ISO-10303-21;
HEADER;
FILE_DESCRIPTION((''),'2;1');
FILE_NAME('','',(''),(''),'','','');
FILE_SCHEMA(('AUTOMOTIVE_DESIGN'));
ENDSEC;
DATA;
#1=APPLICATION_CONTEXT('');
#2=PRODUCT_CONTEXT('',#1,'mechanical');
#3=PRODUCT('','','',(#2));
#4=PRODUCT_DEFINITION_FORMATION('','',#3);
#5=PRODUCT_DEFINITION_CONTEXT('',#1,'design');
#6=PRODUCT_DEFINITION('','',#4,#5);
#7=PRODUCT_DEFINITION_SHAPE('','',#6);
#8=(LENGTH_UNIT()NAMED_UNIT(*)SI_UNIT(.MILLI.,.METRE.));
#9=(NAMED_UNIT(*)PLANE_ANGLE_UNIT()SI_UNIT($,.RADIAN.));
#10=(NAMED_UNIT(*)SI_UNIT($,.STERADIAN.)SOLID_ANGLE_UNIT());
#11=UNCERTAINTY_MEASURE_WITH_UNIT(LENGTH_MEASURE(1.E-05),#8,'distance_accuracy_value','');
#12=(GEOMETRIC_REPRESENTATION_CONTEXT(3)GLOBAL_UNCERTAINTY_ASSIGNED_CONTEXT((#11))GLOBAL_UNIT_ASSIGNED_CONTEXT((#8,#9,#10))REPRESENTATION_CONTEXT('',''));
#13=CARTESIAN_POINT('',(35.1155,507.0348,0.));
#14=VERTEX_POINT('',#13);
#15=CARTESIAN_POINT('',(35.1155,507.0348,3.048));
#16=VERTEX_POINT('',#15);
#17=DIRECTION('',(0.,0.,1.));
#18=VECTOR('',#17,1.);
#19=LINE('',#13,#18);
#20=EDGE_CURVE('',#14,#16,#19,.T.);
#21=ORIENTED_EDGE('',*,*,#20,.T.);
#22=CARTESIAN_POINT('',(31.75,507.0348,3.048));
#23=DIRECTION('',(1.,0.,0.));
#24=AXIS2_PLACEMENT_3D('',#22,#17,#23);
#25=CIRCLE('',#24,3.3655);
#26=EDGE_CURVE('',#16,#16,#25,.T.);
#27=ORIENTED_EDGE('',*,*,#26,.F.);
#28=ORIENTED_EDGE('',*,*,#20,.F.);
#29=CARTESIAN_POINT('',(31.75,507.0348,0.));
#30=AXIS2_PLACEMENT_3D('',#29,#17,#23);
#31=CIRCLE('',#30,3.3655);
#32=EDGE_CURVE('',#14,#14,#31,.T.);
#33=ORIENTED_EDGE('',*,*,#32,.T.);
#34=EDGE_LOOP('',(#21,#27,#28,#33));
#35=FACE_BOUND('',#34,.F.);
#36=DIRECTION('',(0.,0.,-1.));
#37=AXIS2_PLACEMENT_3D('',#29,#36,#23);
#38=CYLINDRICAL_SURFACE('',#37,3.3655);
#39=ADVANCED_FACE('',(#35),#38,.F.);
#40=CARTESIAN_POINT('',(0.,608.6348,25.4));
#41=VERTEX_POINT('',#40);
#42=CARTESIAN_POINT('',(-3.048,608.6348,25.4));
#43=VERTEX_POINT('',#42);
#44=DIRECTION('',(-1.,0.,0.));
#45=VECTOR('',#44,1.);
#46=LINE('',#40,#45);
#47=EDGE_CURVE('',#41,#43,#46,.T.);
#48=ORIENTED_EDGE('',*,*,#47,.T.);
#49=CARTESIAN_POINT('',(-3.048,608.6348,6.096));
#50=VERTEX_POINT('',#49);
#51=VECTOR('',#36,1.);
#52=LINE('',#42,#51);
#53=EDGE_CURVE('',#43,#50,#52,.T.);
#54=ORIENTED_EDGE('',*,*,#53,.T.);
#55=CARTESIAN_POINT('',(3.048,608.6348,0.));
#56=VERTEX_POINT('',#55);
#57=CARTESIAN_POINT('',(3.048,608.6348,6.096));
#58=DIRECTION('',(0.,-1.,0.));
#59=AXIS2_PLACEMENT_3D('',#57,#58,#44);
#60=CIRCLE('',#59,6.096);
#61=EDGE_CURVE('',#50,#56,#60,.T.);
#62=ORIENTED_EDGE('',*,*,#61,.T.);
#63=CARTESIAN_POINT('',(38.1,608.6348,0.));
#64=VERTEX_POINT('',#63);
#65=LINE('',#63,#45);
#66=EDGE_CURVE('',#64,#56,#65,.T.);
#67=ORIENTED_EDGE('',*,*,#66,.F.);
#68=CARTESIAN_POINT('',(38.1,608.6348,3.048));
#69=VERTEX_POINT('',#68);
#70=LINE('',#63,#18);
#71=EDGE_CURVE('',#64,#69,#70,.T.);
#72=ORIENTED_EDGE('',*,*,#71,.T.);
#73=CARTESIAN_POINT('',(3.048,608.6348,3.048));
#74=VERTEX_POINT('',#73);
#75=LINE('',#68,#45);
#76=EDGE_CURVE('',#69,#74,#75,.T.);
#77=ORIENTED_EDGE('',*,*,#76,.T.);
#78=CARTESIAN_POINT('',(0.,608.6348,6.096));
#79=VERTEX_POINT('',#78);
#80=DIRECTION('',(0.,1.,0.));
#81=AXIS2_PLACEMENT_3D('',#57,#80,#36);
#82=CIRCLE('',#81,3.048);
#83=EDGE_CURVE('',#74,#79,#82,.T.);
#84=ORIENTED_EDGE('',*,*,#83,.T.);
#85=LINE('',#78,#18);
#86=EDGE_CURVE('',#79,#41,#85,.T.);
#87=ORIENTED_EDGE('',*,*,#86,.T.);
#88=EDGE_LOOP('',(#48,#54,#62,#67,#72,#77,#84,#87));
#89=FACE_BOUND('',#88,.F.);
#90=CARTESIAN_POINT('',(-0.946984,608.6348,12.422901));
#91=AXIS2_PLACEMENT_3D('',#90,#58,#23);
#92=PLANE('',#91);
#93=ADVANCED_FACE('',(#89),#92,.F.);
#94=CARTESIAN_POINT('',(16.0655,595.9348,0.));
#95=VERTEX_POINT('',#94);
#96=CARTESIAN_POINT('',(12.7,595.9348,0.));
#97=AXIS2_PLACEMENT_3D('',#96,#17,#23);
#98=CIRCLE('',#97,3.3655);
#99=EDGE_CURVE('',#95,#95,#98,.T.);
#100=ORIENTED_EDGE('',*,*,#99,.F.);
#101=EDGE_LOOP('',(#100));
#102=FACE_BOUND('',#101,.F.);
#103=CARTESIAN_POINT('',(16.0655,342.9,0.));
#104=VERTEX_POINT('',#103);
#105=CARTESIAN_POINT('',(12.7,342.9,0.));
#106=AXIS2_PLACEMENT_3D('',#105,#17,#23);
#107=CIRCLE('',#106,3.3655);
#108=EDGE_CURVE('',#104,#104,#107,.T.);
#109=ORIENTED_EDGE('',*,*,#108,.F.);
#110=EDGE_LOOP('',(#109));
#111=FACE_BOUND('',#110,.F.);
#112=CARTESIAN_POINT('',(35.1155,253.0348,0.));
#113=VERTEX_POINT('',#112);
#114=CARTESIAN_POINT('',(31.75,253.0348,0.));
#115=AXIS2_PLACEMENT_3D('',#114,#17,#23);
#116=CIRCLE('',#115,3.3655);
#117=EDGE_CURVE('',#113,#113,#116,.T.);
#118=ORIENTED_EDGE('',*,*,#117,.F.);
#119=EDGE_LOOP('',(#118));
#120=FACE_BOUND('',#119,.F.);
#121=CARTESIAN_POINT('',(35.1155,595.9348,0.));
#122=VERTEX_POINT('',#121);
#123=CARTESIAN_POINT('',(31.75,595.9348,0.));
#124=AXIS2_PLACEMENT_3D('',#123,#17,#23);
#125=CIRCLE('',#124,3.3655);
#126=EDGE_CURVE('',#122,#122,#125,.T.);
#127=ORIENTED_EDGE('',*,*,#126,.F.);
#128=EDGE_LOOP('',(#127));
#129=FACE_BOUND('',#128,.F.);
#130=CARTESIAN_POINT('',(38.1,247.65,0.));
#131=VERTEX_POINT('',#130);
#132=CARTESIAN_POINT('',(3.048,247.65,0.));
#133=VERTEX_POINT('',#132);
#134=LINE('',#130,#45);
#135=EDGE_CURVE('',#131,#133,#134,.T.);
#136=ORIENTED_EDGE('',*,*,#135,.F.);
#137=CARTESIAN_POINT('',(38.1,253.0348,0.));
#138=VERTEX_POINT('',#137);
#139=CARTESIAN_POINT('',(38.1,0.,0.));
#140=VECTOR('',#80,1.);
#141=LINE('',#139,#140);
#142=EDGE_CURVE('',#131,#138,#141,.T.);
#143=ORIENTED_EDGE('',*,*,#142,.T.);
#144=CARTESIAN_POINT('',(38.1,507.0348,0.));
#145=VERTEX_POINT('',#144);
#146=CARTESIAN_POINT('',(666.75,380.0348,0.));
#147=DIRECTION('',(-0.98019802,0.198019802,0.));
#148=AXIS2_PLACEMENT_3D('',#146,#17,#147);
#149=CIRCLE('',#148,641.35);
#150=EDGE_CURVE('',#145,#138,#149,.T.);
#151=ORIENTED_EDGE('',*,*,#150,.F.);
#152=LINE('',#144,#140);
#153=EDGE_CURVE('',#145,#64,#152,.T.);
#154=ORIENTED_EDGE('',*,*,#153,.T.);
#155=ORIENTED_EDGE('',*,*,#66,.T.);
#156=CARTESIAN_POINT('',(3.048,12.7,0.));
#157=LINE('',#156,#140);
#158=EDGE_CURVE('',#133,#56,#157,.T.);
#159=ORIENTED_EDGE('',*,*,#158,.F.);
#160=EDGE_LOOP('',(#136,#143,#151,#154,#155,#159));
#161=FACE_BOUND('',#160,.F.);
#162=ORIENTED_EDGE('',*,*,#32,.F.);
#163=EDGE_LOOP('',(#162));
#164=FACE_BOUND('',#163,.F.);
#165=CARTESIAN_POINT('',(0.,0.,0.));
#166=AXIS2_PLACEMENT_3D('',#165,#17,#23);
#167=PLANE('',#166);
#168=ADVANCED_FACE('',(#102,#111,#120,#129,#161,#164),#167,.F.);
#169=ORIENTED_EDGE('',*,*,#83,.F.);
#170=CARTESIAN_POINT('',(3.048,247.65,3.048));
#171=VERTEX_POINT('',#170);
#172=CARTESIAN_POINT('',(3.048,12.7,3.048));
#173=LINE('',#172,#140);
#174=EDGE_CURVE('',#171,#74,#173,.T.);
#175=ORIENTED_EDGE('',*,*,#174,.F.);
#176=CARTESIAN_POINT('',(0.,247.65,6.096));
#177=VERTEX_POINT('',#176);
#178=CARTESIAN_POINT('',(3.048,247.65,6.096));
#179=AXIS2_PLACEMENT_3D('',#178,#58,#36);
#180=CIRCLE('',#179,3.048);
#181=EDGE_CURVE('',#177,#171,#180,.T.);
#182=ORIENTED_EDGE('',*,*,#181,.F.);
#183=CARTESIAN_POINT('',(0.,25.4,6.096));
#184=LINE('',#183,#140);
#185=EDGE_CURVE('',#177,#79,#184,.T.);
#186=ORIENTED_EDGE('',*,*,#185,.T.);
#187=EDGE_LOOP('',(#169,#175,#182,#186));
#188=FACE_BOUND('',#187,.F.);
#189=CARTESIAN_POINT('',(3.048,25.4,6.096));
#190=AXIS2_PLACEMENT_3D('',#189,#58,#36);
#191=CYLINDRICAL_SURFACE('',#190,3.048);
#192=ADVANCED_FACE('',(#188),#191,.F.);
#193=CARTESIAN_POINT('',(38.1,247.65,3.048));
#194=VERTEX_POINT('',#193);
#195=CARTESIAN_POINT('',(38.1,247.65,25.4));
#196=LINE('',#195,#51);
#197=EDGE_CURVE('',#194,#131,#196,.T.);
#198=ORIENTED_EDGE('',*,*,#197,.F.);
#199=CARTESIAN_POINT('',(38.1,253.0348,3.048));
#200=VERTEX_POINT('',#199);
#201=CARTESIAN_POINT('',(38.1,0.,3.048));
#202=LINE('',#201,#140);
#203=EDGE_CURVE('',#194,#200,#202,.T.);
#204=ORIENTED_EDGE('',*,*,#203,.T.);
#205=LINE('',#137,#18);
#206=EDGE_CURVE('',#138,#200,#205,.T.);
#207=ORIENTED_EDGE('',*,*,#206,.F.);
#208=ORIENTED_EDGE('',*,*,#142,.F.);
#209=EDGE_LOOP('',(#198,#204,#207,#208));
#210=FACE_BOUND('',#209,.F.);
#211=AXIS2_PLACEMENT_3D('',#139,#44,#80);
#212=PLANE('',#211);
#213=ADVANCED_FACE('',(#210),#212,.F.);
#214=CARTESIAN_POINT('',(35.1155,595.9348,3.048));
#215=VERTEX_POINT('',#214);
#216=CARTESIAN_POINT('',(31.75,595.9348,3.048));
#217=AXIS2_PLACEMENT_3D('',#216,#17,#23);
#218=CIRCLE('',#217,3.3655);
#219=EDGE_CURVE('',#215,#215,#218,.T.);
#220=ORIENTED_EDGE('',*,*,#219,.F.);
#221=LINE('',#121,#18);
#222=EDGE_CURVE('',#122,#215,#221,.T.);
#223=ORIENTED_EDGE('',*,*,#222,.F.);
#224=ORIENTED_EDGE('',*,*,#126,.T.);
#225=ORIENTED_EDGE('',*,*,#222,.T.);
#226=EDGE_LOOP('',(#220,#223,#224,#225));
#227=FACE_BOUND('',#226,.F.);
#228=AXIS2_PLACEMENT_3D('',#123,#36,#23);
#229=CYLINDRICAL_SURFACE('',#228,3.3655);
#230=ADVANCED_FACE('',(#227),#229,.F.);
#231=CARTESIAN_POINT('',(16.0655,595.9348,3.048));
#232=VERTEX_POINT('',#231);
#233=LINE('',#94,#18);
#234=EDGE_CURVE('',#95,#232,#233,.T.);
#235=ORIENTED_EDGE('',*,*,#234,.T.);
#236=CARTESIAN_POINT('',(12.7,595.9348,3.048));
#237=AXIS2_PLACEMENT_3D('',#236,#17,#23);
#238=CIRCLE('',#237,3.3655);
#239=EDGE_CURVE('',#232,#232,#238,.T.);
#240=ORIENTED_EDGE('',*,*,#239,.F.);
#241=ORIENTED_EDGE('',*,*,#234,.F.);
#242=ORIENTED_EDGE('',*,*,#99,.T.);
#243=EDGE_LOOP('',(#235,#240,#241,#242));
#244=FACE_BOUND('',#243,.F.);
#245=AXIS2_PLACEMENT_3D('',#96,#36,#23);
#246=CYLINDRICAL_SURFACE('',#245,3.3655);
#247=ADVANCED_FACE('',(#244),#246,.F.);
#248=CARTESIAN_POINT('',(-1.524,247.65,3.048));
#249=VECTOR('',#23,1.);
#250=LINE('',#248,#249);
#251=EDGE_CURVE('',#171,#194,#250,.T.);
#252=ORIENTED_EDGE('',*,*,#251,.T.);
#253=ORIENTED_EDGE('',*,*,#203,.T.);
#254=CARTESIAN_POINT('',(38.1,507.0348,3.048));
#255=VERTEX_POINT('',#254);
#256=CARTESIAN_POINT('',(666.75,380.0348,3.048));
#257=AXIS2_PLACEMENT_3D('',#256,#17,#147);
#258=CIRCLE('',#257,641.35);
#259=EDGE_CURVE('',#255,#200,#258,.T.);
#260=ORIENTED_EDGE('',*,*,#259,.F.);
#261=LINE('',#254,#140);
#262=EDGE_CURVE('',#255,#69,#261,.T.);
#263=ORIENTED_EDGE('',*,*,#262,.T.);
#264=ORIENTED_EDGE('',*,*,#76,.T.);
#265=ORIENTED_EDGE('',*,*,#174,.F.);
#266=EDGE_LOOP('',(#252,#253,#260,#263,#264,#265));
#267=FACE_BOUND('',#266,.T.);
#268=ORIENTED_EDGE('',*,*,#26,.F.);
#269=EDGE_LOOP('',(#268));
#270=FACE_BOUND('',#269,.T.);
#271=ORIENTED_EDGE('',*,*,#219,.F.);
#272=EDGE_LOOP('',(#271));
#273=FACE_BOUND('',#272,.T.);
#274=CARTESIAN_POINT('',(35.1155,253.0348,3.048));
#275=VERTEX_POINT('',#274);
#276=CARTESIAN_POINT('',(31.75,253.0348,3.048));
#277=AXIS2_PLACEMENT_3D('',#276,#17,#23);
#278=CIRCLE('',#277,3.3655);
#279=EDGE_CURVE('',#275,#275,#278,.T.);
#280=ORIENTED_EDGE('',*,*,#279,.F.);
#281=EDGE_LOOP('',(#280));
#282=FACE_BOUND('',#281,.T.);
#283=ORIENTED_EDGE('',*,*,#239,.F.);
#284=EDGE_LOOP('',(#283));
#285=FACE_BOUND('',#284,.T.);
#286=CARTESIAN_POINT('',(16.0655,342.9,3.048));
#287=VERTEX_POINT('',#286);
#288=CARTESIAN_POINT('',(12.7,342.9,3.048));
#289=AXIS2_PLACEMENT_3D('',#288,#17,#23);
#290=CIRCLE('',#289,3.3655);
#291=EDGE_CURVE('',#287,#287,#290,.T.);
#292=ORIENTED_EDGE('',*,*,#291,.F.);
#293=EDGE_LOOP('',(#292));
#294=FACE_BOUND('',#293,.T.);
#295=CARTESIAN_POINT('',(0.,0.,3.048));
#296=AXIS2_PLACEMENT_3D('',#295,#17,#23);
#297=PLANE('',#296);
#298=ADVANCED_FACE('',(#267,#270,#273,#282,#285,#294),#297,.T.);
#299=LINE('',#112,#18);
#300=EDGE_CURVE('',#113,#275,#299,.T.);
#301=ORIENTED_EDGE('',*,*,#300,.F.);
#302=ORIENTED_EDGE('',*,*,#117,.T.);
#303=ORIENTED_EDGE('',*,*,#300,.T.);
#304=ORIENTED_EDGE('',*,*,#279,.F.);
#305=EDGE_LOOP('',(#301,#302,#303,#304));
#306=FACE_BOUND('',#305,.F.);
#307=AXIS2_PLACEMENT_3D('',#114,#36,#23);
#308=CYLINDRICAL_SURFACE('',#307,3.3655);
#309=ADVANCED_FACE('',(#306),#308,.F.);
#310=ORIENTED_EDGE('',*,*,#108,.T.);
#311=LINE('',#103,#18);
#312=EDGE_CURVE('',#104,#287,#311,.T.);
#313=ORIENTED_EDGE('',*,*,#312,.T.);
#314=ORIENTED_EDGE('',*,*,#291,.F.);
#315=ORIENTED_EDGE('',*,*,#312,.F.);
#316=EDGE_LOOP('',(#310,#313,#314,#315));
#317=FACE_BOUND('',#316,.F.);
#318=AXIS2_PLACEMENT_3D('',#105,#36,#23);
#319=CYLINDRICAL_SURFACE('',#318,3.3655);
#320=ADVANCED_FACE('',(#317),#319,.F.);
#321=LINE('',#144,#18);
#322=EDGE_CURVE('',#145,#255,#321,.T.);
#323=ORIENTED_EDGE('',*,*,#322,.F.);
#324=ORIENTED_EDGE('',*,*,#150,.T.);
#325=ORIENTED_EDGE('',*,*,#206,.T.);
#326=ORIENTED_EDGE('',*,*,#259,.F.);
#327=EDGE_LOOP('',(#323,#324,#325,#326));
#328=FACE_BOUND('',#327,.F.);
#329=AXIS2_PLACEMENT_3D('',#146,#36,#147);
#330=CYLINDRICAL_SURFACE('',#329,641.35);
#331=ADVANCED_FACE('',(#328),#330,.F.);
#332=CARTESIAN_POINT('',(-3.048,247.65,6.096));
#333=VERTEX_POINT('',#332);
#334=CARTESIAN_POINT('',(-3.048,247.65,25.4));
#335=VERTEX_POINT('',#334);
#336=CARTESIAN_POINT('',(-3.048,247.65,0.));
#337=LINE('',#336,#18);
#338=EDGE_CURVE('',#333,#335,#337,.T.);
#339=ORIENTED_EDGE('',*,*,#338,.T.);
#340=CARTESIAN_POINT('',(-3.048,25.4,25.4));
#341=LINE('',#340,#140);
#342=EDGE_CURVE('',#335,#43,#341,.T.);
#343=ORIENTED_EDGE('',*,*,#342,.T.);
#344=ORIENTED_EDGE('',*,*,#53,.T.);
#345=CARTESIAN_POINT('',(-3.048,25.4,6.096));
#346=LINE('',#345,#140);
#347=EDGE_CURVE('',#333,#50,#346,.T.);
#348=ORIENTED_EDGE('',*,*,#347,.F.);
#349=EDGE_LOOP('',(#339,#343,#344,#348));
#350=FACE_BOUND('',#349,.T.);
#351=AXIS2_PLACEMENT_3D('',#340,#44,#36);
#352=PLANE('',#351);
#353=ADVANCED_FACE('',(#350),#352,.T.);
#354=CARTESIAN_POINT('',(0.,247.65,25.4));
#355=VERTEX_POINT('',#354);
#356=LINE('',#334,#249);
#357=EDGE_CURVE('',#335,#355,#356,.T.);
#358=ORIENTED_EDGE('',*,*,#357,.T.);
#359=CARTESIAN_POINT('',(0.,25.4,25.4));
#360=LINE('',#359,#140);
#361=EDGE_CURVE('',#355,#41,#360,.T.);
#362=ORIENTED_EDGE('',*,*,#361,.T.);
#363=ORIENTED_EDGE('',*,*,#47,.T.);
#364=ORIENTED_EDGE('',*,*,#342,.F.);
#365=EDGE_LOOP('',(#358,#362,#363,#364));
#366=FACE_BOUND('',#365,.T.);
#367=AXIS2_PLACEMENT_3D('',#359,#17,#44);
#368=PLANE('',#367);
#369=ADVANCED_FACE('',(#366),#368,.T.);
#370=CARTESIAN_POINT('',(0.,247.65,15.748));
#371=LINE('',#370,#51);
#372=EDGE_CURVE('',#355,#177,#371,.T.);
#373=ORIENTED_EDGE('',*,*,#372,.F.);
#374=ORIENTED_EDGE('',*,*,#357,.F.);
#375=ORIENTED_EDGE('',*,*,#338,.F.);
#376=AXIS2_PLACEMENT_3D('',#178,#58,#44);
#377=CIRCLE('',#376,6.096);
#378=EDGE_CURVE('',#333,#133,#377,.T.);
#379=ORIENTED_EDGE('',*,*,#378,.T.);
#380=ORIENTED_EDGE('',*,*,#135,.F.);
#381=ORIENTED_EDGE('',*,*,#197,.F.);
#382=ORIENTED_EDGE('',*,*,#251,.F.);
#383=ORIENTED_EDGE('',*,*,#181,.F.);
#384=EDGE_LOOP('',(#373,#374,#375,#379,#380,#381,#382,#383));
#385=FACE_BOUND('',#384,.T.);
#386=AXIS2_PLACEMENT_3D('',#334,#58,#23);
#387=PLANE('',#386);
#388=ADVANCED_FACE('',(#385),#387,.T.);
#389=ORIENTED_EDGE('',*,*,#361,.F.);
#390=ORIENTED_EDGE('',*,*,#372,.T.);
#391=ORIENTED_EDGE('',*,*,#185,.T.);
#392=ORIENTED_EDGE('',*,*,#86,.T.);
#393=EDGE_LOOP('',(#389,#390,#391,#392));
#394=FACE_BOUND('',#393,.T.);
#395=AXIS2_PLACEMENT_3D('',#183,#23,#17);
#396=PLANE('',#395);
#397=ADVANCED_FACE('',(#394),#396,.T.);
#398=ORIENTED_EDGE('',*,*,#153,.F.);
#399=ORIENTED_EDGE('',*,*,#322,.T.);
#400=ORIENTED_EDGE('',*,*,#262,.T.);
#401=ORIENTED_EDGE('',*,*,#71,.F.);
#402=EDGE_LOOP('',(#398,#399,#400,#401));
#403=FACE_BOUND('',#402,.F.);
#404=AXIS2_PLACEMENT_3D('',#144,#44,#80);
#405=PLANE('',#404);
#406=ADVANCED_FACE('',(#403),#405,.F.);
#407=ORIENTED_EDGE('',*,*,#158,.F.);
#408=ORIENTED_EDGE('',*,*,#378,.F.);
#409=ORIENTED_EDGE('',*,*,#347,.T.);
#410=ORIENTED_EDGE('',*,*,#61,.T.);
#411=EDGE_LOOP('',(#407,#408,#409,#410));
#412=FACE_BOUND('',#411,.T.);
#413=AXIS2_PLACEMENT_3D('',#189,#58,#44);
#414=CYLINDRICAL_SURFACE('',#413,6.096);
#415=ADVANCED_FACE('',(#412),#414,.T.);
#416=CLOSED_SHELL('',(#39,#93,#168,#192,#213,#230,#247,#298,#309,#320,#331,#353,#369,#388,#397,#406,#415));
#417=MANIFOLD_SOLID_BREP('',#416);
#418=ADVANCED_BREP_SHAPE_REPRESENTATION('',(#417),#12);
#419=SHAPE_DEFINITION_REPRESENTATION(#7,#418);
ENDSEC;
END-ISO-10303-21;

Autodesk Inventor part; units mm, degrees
ref_plane "YZ Plane" through (0, 0, 0) normal (1, 0, 0) x (0, 1, 0)
ref_plane "XZ Plane" through (0, 0, 0) normal (0, 1, 0) x (-1, 0, 0)
ref_plane "XY Plane" through (0, 0, 0) normal (0, 0, 1) x (1, 0, 0)
sketch "Sketch1" plane through (0, 0, 0) normal (0, 0, 1) x (1, 0, 0)
  line L0 (0, 0) -> (38.1, 0)
  line L1 (38.1, 0) -> (38.1, 253.0348)
  arc A0 (38.1, 507.0348) -> (38.1, 253.0348) centre (666.75, 380.0348) ccw
  line L2 (38.1, 507.0348) -> (38.1, 608.6348)
  line L3 (38.1, 608.6348) -> (0, 608.6348)
  line L4 (0, 608.6348) -> (0, 0)
  circle A1 centre (31.75, 151.4348) radius 3.3655
  circle A2 centre (31.75, 34.671) radius 3.3655
  circle A3 centre (12.7, 12.7) radius 3.3655
  circle A4 centre (12.7, 342.9) radius 3.3655
  circle A5 centre (12.7, 595.9348) radius 3.3655
  circle A6 centre (31.75, 12.7) radius 3.3655
  circle A7 centre (31.75, 253.0348) radius 3.3655
  circle A8 centre (31.75, 507.0348) radius 3.3655
  circle A9 centre (31.75, 595.9348) radius 3.3655
  line L5 (0, 557.8348) -> (0, 608.6348)
  line L6 (0, 50.8) -> (0, 0)
  line L7 (12.7, 342.9) -> (0, 304.3174) construction
  line L8 (0, 317.5) -> (0, 368.3)
  line L9 (0, 129.921) -> (12.7, 129.921) construction
  circle A10 centre (12.7, 129.921) radius 3.3655
  circle A11 centre (12.7, 174.371) radius 3.3655
  line L10 (9.3413, 197.482) -> (9.3413, 204.213)
  line L11 (16.0611, 204.488) -> (16.0611, 197.3435)
  arc A12 (16.0611, 204.488) -> (9.3413, 204.213) centre (12.6956, 204.488) ccw
  arc A13 (9.3413, 197.482) -> (16.0611, 197.3435) centre (12.6974, 197.231) ccw
  circle A14 centre (12.7, 217.188) radius 3.3655
  dimension "d0" = 38.1
  dimension "d2" = 101.6
  dimension "d4" = 457.2
  dimension "d5" = 101.6
  dimension "d6" = 666.75
  dimension "d7" = 641.35
  dimension "d9" = 116.7638
  dimension "d10" = 6.35
  dimension "d11" = 6.35
  dimension "d13" = 12.7
  dimension "d14" = 12.7
  dimension "d16" = 12.7
  dimension "d17" = 342.9
  dimension "d19" = 12.7
  dimension "d20" = 12.7
  dimension "d22" = 6.35
  dimension "d24" = 6.35
  dimension "d25" = 6.731
  dimension "d26" = 6.35
  dimension "hole" = 6.731
  dimension "d28" = 6.35
  dimension "d45" = 12.7
  dimension "d47" = 12.7
  dimension "d54" = 6.731
  dimension "d55" = 3.3655
  dimension "d56" = 3.3655
  dimension "d58" = 6.731
  dimension "d59" = 12.7
  dimension "d68" = 18.22
  dimension "d69" = 90
  dimension "d70" = 90
  dimension "d71" = 22.0389
  dimension "d72" = 28.7587
  dimension "d73" = 478.7138
  dimension "d74" = 6.35
  dimension "d75" = 6.35
  dimension "d76" = 595.9348
  dimension "d77" = 404.1468
  dimension "d78" = 411.2913
  dimension "d79" = 25.4
  dimension "d80" = 25.4
  dimension "d81" = 434.2638
  dimension "d82" = 50.8
  dimension "d83" = 240.3348
  dimension "d84" = 291.1348
  dimension "d85" = 557.8348
extrude "Plate4" add sketch "Sketch1" along normal blind 3.048
sketch "Sketch5" plane through (0, 0, 3.048) normal (0, 0, 1) x (1, 0, 0)
  line L0 (38.1, 0) -> (38.1, 253.0348) projected
  line L1 (0, 0) -> (38.1, 0)
  line L2 (38.1, 0) -> (38.1, 25.4)
  line L3 (38.1, 25.4) -> (0, 25.4)
  line L4 (0, 25.4) -> (0, 0)
  dimension "d96" = 25.4
extrude "Cut1" cut sketch "Sketch5" against normal blind 3.048
sketch "Sketch7" plane through (0, 25.4, 3.048) normal (-1, 0, 0) x (0, -1, 0)
  line L0 (-583.2348, 0) -> (0, 0)
  line L1 (0, 0) -> (0, 22.352)
  line L2 (0, 22.352) -> (-583.2348, 22.352)
  line L3 (-583.2348, 22.352) -> (-583.2348, 0)
edge flange "Flange3" height 25.4 angle 90 thickness 3.048 bend radius 3.048 thickness toward (-1, 0, 0) relief tear relief width 3.048 relief depth 1.524 edges at (0, 317.0174, 3.048) wall of the first edge with corners at (0, 608.6348, 3.048) (0, 25.4, 3.048) (0, 25.4, 25.4) (0, 608.6348, 25.4)
bend "Bend3"
corner "Corner3"
sketch "Sketch8" plane through (-3.048, 25.4, 25.4) normal (0, -1, 0) x (1, 0, 0)
  line L0 (0, 0) -> (41.148, 0)
  line L1 (41.148, 0) -> (41.148, -25.4)
  line L2 (41.148, -25.4) -> (0, -25.4)
  line L3 (0, -25.4) -> (0, 0)
  point P0 (3.048, -25.4)
extrude "Extrusion1" cut sketch "Sketch8" against normal blind 222.25
equation "\"d25\" = hole"
equation "\"d97\" = Thickness"
equation "\"d109\" = BendReliefWidth"
equation "\"d110\" = BendReliefDepth"
equation "\"d111\" = MinimumRemnant"
equation "\"d112\" = BendRadius"
equation "\"d115\" = BendRadius"
equation "\"d116\" = CornerReliefSize"
equation "\"d117\" = GapSize"
equation "\"d118\" = JacobiRadiusSize"
equation "\"BendRadius\" = Thickness"
equation "\"BendReliefWidth\" = Thickness"
equation "\"BendReliefDepth\" = 0.5 * Thickness"
equation "\"CornerReliefSize\" = 4 * Thickness"
equation "\"MinimumRemnant\" = 2 * Thickness"
equation "\"TransitionRadius\" = BendRadius"
equation "\"JacobiRadiusSize\" = BendRadius"
equation "\"GapSize\" = Thickness"
equation "\"d29\" = BendRadius"
equation "\"d32\" = BendRadius"
equation "\"d38\" = BendRadius"
equation "\"d60\" = BendRadius"
equation "\"Thickness\" = 3.048"
properties part number "Claw - Arm - Top (R) Bottom"
